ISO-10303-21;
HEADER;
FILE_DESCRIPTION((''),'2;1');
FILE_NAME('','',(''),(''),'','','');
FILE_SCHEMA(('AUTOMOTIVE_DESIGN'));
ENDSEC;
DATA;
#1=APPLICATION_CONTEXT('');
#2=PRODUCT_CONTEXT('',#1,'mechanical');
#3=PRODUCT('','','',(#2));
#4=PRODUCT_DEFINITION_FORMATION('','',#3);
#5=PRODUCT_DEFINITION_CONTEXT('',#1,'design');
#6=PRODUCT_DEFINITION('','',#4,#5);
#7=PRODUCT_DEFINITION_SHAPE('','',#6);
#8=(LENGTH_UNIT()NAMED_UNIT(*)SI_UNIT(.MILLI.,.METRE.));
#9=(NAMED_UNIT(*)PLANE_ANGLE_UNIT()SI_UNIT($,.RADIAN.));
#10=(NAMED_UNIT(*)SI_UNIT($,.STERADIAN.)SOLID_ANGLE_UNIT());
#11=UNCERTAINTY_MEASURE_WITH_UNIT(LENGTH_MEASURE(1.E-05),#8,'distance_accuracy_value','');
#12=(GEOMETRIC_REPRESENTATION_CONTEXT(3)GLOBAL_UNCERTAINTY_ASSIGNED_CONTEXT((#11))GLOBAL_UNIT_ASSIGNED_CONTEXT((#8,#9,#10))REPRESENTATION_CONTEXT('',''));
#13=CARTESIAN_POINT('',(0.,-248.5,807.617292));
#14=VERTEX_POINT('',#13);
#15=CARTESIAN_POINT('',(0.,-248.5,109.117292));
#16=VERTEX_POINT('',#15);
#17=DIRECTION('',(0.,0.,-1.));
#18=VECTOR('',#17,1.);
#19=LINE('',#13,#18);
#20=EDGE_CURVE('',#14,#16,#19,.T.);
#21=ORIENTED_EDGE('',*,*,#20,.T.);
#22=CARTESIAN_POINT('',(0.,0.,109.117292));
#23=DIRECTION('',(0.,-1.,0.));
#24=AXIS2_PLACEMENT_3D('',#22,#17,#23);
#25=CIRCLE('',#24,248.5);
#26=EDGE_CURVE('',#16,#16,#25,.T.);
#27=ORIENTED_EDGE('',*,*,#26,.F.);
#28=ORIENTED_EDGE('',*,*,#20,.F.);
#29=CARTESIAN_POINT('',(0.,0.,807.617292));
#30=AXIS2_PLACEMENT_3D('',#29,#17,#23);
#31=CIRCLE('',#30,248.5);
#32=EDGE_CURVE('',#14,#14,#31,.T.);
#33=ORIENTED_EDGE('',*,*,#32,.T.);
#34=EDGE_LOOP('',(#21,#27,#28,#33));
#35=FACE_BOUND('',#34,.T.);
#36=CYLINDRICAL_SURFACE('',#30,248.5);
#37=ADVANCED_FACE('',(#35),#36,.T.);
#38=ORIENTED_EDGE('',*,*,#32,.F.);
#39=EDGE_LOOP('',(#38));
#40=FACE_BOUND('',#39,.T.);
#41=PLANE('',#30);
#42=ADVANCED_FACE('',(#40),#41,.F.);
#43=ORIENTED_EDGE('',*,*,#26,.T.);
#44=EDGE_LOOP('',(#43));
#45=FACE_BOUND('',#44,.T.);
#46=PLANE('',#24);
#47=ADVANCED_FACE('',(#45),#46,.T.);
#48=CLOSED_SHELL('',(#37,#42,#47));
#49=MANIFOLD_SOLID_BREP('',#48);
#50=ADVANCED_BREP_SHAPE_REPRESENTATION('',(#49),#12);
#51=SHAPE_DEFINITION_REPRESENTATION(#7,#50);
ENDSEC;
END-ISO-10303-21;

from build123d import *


# Not quite as in the source:
# - a feature of the source that left no trace in its solid (it failed there, or was rolled back) is left out


with BuildPart() as f1:
    # F0 (on Right) → F1 (revolve)
    with BuildSketch(Plane.YZ):
        Polygon((-248.5, 807.6172916793), (-248.5, 149.1172916793), (-248.5, 109.1172916793), (0, 109.1172916793), (0, 807.6172916793), align=None)
    revolve(axis=Axis((0, 0, -107.16170392), (0, 0, -1)))


solid = f1.part
